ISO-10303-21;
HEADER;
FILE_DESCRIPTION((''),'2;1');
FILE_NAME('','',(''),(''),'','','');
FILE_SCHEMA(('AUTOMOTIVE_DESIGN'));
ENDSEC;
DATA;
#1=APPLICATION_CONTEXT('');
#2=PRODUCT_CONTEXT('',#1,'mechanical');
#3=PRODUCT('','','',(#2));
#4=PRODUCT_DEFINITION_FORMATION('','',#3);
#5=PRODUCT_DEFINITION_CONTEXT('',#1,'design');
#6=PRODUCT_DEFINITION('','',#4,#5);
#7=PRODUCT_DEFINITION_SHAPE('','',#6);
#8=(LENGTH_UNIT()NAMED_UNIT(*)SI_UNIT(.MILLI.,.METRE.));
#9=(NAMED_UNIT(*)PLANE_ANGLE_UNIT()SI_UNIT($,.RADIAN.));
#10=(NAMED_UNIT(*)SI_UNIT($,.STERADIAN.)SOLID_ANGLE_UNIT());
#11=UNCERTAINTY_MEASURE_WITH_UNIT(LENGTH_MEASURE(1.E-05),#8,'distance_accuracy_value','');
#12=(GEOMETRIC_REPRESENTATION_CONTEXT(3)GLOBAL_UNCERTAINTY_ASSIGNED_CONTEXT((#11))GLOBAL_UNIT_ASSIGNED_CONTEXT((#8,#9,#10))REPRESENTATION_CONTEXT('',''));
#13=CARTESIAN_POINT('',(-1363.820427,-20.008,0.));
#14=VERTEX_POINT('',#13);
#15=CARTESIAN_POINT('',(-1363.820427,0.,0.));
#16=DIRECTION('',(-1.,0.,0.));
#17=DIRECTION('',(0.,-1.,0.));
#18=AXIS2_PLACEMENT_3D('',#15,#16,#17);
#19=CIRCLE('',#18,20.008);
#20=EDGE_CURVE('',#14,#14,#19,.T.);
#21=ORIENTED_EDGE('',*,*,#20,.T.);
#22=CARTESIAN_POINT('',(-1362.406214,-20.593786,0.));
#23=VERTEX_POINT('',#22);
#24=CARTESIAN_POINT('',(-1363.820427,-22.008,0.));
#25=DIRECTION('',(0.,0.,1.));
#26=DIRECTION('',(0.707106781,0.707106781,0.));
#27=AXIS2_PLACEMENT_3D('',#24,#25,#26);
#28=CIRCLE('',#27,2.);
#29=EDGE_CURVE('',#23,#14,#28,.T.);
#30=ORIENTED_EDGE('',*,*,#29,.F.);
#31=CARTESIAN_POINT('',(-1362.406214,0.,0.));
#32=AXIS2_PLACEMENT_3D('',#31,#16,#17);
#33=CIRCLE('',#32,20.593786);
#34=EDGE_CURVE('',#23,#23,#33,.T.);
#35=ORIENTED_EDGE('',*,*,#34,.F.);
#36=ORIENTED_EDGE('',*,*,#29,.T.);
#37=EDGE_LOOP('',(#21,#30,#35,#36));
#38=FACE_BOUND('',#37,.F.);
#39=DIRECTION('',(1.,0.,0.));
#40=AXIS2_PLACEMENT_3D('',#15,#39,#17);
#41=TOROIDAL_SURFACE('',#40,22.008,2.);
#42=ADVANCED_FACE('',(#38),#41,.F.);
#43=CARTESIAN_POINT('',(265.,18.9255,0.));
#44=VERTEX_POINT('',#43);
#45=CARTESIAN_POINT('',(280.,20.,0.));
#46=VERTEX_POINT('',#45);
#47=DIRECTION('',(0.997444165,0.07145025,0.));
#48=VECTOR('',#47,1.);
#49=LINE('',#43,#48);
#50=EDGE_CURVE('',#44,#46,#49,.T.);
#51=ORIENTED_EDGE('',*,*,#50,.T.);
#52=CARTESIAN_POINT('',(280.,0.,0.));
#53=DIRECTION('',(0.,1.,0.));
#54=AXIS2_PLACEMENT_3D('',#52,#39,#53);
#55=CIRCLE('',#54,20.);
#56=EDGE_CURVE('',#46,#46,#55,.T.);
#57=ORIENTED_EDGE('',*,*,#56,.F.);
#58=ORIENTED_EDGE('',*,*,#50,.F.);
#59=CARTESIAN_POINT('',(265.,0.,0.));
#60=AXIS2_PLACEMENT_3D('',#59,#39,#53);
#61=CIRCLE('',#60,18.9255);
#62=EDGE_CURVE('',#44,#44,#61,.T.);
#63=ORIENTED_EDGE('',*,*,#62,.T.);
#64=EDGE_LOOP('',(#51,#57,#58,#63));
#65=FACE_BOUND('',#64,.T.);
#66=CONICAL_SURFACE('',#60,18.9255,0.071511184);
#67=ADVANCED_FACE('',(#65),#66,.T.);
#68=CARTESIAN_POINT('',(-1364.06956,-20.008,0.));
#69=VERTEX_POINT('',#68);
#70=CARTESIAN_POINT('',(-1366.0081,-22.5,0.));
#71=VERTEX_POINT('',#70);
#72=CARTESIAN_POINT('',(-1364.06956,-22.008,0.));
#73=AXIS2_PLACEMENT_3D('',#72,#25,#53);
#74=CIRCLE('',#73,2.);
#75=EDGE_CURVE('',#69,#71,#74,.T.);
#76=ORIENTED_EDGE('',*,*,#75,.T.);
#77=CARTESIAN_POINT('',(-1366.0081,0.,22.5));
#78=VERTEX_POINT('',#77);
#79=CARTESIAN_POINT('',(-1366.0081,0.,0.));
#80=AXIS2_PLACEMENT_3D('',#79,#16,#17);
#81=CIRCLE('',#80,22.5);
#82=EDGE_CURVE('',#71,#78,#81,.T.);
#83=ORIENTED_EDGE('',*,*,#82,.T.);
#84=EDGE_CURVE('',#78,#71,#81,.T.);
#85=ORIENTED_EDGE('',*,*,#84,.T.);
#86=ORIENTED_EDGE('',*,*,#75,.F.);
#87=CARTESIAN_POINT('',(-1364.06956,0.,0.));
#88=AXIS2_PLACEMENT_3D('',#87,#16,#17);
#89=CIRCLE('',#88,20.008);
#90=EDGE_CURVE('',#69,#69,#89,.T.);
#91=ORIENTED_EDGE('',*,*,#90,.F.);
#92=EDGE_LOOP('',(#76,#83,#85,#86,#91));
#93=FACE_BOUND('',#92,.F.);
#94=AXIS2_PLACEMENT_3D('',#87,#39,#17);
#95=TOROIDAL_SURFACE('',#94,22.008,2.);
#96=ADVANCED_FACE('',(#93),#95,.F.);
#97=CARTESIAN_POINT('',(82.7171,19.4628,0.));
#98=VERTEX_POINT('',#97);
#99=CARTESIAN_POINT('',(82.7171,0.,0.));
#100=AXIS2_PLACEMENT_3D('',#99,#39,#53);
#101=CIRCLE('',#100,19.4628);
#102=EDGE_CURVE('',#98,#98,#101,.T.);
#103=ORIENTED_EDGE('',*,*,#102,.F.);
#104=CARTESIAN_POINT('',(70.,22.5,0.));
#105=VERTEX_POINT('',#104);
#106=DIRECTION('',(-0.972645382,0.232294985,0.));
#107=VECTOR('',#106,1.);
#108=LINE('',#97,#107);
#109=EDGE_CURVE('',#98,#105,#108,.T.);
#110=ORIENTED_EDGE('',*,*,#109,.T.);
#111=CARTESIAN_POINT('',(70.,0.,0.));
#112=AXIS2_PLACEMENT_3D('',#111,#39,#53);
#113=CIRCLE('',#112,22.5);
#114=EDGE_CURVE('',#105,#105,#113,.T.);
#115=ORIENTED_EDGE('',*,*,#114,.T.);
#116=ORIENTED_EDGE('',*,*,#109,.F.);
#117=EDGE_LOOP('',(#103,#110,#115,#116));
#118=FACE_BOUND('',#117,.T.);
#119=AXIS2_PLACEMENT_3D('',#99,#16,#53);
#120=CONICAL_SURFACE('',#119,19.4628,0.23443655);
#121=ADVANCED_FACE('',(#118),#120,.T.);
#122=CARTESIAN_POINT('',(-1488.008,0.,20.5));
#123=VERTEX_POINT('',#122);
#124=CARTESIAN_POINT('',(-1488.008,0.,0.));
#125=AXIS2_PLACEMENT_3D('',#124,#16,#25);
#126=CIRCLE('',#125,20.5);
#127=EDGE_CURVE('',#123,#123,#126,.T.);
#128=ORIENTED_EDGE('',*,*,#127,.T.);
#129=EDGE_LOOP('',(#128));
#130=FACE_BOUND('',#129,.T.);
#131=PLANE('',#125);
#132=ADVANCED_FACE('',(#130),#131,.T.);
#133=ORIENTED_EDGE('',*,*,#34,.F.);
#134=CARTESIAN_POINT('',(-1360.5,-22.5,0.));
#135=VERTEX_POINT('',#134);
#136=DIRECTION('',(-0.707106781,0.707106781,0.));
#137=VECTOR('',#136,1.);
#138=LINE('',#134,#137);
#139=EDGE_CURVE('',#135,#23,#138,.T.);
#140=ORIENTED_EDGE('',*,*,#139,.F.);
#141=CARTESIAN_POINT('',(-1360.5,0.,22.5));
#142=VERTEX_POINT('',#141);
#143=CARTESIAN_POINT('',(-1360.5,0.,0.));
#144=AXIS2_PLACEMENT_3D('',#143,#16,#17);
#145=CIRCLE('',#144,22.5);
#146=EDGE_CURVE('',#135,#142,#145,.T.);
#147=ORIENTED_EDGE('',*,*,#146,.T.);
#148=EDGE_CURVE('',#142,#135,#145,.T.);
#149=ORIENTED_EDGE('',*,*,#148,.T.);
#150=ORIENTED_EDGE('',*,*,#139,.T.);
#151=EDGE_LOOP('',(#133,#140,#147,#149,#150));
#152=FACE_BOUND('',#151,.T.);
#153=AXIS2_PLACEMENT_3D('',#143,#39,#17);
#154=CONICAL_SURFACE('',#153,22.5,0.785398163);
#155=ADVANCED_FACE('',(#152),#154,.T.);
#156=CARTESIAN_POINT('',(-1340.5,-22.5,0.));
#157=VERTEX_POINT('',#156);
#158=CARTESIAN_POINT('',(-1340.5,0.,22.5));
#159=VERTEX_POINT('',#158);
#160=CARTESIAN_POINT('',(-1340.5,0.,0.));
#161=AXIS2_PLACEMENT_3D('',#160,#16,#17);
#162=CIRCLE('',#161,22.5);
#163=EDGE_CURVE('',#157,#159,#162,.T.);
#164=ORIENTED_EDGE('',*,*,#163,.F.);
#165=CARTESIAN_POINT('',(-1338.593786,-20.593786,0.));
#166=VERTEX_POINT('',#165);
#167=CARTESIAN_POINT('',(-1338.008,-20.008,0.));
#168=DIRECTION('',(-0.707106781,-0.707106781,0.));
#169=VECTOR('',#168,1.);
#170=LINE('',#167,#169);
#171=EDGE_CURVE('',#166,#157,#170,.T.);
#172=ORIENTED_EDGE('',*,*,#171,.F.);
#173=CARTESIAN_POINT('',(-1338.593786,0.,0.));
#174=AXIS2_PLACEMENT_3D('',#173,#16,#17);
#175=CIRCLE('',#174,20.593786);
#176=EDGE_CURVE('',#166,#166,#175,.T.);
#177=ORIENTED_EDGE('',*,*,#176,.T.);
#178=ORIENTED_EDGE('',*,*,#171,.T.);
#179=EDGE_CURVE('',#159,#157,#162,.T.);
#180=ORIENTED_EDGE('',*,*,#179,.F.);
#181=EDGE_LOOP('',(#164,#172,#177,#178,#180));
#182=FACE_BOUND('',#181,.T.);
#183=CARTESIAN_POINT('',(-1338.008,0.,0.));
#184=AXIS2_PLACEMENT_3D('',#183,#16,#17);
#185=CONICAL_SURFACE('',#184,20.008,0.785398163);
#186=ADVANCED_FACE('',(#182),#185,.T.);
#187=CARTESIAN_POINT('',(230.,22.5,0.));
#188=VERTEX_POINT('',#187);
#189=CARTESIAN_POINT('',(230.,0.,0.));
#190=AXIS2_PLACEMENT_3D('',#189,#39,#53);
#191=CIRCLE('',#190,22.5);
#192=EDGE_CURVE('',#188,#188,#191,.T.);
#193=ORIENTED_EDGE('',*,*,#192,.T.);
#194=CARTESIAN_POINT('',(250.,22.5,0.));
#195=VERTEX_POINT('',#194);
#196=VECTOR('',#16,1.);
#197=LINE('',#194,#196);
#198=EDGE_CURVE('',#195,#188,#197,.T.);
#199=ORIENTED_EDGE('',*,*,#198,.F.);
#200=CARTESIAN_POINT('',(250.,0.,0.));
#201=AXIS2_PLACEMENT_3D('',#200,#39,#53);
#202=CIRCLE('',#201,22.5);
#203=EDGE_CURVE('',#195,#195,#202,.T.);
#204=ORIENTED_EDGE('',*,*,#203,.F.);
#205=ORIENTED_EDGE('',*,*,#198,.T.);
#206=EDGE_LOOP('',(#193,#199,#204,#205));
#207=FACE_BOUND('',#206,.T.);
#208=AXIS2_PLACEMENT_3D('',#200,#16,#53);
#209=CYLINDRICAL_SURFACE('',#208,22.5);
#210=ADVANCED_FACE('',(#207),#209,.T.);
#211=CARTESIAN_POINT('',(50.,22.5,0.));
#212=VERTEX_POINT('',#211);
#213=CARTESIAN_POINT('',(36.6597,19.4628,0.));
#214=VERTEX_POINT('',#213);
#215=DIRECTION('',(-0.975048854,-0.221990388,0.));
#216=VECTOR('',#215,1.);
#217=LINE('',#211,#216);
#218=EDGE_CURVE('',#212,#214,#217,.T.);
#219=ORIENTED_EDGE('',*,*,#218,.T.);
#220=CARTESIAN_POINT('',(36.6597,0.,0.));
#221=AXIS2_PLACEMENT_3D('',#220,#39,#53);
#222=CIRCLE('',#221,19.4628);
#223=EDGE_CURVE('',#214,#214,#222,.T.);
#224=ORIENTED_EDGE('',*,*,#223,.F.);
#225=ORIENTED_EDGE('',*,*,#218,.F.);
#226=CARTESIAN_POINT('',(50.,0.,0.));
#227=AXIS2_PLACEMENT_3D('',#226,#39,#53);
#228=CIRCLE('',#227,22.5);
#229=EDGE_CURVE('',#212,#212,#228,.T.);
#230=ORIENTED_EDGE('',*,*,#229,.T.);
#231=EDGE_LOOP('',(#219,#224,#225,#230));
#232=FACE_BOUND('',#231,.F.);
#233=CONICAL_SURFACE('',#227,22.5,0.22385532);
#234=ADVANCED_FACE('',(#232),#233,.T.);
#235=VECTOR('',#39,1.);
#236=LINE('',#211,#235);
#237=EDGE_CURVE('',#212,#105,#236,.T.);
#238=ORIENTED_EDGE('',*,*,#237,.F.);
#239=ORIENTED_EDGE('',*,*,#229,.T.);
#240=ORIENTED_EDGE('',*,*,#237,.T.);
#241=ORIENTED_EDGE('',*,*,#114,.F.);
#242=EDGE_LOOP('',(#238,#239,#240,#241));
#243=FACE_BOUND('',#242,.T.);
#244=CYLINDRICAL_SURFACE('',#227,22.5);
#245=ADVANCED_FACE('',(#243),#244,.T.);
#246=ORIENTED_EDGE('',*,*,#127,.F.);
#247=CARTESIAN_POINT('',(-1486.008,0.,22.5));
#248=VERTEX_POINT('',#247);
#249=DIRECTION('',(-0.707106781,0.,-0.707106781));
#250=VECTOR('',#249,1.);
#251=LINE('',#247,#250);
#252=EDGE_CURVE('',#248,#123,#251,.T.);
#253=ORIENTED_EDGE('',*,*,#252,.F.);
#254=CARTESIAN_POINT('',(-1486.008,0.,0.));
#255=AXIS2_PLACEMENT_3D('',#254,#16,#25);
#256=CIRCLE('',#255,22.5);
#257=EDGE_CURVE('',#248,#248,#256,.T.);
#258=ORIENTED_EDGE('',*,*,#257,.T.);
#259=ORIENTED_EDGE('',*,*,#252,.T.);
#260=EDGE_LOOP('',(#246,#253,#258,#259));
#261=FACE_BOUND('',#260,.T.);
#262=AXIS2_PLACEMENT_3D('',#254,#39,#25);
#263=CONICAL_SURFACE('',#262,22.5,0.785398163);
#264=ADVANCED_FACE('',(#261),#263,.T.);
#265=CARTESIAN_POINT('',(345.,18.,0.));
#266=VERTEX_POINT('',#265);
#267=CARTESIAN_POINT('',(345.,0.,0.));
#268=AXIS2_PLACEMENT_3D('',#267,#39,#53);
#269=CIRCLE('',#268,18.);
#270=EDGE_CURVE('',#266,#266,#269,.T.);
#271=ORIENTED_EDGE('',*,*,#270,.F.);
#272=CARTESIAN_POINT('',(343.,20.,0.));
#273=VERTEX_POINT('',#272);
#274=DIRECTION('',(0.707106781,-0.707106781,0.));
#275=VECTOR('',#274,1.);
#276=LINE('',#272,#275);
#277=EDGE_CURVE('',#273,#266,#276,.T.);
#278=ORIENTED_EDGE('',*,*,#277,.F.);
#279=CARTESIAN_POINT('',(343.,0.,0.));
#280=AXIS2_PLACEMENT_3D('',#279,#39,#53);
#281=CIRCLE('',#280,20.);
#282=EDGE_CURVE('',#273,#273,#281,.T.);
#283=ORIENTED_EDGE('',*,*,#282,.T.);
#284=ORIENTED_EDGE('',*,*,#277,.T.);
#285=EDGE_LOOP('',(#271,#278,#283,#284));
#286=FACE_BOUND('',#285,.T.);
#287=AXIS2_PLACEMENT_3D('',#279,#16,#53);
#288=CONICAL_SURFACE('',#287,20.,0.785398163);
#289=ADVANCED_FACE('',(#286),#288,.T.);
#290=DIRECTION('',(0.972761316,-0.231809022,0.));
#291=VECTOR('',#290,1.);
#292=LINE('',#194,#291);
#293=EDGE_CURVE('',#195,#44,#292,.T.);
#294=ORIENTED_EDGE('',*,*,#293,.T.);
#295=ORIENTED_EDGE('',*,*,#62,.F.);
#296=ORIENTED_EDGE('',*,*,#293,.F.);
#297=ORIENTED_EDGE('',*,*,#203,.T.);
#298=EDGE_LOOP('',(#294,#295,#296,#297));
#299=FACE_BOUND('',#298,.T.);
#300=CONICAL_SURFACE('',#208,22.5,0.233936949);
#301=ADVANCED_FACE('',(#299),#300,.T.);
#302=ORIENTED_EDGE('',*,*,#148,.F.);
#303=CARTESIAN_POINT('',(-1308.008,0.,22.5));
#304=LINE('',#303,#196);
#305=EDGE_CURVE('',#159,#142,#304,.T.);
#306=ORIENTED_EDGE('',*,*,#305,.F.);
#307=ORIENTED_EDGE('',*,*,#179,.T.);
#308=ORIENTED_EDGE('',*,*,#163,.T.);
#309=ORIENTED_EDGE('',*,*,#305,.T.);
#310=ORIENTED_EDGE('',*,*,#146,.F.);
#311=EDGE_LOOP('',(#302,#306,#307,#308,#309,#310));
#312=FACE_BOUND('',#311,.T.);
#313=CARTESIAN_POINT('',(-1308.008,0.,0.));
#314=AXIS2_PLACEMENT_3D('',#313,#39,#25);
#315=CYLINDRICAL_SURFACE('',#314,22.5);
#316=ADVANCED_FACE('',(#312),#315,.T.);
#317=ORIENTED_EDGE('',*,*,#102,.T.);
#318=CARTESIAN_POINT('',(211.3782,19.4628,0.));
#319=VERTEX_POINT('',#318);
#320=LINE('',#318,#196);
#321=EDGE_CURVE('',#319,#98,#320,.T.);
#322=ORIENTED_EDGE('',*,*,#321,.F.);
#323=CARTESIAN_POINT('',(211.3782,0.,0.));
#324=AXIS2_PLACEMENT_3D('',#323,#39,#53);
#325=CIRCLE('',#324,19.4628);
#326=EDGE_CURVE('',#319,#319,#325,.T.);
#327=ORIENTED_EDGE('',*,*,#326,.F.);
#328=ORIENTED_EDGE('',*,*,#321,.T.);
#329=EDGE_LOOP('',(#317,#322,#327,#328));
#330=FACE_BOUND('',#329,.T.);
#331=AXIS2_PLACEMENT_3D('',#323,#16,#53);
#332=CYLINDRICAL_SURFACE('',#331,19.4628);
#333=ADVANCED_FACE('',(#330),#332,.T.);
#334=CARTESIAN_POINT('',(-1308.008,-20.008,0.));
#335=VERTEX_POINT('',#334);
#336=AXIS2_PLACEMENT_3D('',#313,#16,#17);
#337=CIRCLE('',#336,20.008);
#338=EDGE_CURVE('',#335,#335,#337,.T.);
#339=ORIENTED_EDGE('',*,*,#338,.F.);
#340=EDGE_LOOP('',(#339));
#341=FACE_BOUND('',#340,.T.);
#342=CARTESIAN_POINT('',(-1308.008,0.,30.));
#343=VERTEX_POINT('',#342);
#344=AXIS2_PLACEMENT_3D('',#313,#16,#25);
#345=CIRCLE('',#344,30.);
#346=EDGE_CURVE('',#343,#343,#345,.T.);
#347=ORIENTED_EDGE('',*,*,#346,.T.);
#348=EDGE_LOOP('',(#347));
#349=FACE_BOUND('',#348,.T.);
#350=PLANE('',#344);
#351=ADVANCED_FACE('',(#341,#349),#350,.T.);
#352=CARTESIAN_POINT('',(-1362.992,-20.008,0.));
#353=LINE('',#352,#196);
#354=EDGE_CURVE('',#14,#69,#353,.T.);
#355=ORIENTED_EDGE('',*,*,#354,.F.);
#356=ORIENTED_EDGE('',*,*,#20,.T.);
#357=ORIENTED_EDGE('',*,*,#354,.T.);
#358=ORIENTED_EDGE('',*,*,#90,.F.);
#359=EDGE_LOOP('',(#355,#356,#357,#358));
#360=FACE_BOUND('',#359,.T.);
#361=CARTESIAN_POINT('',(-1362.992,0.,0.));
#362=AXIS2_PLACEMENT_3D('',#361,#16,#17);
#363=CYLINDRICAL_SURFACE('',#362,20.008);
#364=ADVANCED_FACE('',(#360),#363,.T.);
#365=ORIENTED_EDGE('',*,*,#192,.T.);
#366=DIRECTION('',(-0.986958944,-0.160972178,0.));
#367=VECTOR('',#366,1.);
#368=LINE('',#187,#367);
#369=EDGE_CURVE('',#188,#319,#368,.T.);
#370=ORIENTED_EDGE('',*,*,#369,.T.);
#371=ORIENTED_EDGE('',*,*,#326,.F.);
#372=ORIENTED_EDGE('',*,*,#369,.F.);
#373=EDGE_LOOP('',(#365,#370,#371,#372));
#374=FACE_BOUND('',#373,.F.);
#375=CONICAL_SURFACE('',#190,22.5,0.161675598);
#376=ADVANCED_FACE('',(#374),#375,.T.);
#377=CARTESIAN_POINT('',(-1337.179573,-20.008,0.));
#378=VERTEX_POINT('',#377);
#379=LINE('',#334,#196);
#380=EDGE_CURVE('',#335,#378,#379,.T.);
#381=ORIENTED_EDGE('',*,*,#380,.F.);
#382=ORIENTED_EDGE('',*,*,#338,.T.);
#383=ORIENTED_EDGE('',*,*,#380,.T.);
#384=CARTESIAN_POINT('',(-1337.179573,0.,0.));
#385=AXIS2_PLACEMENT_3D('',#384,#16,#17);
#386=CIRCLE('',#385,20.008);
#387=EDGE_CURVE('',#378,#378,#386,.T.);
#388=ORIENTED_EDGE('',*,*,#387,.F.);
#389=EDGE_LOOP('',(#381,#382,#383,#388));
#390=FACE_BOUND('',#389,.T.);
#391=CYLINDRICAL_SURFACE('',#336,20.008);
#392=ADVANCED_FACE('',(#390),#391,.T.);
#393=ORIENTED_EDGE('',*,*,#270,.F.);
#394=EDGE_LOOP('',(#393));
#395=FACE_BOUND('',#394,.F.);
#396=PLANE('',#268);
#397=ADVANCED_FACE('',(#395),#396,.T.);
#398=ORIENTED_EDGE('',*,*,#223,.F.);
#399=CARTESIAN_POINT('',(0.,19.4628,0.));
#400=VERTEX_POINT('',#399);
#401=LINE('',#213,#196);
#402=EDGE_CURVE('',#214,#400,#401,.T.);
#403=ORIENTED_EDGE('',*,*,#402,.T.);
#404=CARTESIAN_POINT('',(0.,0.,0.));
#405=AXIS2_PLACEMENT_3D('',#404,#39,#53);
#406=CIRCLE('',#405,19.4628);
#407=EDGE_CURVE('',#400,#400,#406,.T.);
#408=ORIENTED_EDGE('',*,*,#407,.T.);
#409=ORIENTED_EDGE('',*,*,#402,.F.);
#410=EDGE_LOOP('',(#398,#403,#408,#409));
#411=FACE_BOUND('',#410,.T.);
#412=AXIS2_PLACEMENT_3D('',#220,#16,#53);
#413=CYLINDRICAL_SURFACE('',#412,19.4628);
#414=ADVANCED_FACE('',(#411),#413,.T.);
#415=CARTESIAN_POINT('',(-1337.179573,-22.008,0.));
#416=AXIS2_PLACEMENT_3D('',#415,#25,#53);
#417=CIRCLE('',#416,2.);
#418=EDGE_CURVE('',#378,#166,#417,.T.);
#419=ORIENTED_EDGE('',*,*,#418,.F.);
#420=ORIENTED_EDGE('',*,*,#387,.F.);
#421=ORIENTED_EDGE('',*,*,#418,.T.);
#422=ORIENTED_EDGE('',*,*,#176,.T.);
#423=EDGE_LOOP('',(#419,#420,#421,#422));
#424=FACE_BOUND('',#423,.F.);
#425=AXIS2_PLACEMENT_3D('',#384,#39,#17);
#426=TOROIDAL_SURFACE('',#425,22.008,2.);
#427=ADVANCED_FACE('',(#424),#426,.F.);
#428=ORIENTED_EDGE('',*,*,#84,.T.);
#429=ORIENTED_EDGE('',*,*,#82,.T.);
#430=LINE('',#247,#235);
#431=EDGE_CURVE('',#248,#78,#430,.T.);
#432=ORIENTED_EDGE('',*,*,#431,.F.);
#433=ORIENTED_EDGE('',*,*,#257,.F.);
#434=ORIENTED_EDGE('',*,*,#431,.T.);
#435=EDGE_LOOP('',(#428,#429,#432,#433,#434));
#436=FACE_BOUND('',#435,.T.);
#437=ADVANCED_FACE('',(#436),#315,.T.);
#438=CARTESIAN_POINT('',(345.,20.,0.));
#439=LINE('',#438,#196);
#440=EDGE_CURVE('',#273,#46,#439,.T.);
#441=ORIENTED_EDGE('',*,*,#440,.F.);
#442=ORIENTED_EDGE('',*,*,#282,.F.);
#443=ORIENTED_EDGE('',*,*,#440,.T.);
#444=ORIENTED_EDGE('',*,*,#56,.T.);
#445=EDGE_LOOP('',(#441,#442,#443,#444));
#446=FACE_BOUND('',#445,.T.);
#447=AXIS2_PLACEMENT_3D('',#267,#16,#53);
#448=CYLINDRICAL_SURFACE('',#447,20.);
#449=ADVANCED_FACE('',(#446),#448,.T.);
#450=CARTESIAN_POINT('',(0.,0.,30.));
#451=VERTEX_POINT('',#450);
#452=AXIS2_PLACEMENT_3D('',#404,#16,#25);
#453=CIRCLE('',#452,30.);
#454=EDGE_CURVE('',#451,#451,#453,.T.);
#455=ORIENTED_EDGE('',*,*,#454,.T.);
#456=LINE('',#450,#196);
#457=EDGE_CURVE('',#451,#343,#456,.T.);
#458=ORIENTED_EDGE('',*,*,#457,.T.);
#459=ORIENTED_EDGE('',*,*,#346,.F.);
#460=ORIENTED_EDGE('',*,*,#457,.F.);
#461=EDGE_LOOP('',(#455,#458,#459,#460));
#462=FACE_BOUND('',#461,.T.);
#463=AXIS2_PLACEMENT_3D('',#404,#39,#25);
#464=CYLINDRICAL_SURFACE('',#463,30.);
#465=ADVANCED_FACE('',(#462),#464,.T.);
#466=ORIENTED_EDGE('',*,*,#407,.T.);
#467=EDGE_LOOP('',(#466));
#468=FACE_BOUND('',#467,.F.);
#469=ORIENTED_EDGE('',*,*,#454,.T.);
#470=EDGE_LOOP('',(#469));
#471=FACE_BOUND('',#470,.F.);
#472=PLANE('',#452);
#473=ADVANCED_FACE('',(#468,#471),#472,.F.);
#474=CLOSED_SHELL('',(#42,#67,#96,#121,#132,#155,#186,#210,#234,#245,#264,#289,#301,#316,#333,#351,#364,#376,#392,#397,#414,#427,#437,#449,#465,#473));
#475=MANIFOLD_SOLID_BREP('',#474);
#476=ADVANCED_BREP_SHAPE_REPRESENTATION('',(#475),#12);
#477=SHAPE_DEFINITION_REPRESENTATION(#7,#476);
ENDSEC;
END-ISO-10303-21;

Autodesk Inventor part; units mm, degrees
ref_plane "YZ Plane" through (0, 0, 0) normal (1, 0, 0) x (0, 1, 0)
ref_plane "XZ Plane" through (0, 0, 0) normal (0, 1, 0) x (-1, 0, 0)
ref_plane "XY Plane" through (0, 0, 0) normal (0, 0, 1) x (1, 0, 0)
sketch "Эскиз1" plane through (0, 0, 0) normal (0, 0, 1) x (1, 0, 0)
  line L0 (0, 0) -> (345, 0)
  line L1 (345, 0) -> (345, 20)
  line L2 (345, 20) -> (280, 20)
  line L3 (0, 0) -> (0, 22.5)
  line L4 (0, 22.5) -> (50, 22.5)
  line L5 (50, 22.5) -> (70, 22.5)
  line L6 (250, 22.5) -> (230, 22.5)
  line L7 (250, 22.5) -> (265, 18.9255)
  line L8 (265, 18.9255) -> (280, 20)
  line L9 (82.7171, 19.4628) -> (70, 22.5)
  line L10 (50, 22.5) -> (36.6597, 19.4628)
  line L11 (36.6597, 19.4628) -> (0, 19.4628)
  line L12 (230, 22.5) -> (211.3782, 19.4628)
  line L13 (211.3782, 19.4628) -> (82.7171, 19.4628)
  dimension "d0" = 345
  dimension "d1" = 20
  dimension "d2" = 65
  dimension "d5" = 22.5
  dimension "d6" = 50
  dimension "d7" = 20
  dimension "d8" = 20
  dimension "d15" = 30
revolve "Вращение1" add sketch "Эскиз1" angle 360 about axis through (0, 0, 0) along (1, 0, 0) contours L3 L11 L10 L5 L9 L13 L12 L6 L7 L8 L2 L1 L0
thread "Резьба1" size "M40x3" class "6g" standard "ANSI Metric M Profile" full length
sketch "Эскиз2" plane through (0, 0, 0) normal (-1, 0, 0) x (0, 0, 1)
  circle A0 centre (0, 0) radius 30
  dimension "d12" = 60
extrude "Выдавливание1" add sketch "Эскиз2" along normal blind 1308.008
sketch "Эскиз3" plane through (-1308.008, 0, 0) normal (-1, 0, 0) x (0, 0, 1)
  circle A0 centre (0, 0) radius 22.5
  dimension "d16" = 45
extrude "Выдавливание2" add sketch "Эскиз3" along normal blind 180
sketch "Эскиз4" plane through (0, 0, 0) normal (0, 0, 1) x (1, 0, 0)
  line L0 (-1308.008, 30) -> (-1308.008, -30) projected
  line L1 (-1488.008, 22.5) -> (-1488.008, -22.5) projected
  line L2 (-1308.008, -22.5) -> (-1308.008, 22.5) projected
  line L3 (-1308.008, 0) -> (-1308.008, 20)
  line L4 (-1308.008, 22.5) -> (-1308.008, 20)
  line L5 (-1308.008, 0) -> (-1308.008, -20.008)
  line L6 (-1308.008, -20.008) -> (-1338.008, -20.008)
  line L7 (-1338.008, -20.008) -> (-1340.5, -22.5)
  line L8 (-1340.5, -22.5) -> (-1360.5, -22.5)
  line L9 (-1308.008, -22.5) -> (-1488.008, -22.5) projected
  line L10 (-1360.5, -22.5) -> (-1362.992, -20.008)
  line L11 (-1366.0081, 27.5) -> (-1366.0081, -27.5) projected
  line L12 (-1362.992, -20.008) -> (-1388.5, -20.008)
  line L13 (-1388.5, -20.008) -> (-1366.0081, -22.5)
  line L14 (-1308.008, -22.5) -> (-1488.008, -22.5) projected
  line L15 (-1383, 0) -> (-1400.8637, 0)
  point P0 (-1340.5, -22.5)
  point P1 (-1308.008, -20.008)
  point P2 (-1348.9963, -21.5037)
  dimension "d31" = 30
  dimension "d32" = 135
  dimension "d33" = 20
  dimension "d34" = 135
revolve "Вращение2" cut sketch "Эскиз4" angle 360 about axis through (-1383, 0, 0) along (-1, 0, 0)
chamfer "Фаска1" distance 2 angle 45 1 edges at (-1488.008, 0, -22.5)
thread "Резьба2" size "M45x4.5" class "6g" standard "ANSI Metric M Profile" full length
chamfer "Фаска2" distance 2 angle 45 1 edges at (345, -20, 0)
fillet "Сопряжение2" radius 2 3 edges at (-1338.008, 20.008, 0) (-1362.992, 20.008, 0) (-1388.5, 20.008, 0)
properties part number "Шток_CPY" material "Сталь, углеродистая"
